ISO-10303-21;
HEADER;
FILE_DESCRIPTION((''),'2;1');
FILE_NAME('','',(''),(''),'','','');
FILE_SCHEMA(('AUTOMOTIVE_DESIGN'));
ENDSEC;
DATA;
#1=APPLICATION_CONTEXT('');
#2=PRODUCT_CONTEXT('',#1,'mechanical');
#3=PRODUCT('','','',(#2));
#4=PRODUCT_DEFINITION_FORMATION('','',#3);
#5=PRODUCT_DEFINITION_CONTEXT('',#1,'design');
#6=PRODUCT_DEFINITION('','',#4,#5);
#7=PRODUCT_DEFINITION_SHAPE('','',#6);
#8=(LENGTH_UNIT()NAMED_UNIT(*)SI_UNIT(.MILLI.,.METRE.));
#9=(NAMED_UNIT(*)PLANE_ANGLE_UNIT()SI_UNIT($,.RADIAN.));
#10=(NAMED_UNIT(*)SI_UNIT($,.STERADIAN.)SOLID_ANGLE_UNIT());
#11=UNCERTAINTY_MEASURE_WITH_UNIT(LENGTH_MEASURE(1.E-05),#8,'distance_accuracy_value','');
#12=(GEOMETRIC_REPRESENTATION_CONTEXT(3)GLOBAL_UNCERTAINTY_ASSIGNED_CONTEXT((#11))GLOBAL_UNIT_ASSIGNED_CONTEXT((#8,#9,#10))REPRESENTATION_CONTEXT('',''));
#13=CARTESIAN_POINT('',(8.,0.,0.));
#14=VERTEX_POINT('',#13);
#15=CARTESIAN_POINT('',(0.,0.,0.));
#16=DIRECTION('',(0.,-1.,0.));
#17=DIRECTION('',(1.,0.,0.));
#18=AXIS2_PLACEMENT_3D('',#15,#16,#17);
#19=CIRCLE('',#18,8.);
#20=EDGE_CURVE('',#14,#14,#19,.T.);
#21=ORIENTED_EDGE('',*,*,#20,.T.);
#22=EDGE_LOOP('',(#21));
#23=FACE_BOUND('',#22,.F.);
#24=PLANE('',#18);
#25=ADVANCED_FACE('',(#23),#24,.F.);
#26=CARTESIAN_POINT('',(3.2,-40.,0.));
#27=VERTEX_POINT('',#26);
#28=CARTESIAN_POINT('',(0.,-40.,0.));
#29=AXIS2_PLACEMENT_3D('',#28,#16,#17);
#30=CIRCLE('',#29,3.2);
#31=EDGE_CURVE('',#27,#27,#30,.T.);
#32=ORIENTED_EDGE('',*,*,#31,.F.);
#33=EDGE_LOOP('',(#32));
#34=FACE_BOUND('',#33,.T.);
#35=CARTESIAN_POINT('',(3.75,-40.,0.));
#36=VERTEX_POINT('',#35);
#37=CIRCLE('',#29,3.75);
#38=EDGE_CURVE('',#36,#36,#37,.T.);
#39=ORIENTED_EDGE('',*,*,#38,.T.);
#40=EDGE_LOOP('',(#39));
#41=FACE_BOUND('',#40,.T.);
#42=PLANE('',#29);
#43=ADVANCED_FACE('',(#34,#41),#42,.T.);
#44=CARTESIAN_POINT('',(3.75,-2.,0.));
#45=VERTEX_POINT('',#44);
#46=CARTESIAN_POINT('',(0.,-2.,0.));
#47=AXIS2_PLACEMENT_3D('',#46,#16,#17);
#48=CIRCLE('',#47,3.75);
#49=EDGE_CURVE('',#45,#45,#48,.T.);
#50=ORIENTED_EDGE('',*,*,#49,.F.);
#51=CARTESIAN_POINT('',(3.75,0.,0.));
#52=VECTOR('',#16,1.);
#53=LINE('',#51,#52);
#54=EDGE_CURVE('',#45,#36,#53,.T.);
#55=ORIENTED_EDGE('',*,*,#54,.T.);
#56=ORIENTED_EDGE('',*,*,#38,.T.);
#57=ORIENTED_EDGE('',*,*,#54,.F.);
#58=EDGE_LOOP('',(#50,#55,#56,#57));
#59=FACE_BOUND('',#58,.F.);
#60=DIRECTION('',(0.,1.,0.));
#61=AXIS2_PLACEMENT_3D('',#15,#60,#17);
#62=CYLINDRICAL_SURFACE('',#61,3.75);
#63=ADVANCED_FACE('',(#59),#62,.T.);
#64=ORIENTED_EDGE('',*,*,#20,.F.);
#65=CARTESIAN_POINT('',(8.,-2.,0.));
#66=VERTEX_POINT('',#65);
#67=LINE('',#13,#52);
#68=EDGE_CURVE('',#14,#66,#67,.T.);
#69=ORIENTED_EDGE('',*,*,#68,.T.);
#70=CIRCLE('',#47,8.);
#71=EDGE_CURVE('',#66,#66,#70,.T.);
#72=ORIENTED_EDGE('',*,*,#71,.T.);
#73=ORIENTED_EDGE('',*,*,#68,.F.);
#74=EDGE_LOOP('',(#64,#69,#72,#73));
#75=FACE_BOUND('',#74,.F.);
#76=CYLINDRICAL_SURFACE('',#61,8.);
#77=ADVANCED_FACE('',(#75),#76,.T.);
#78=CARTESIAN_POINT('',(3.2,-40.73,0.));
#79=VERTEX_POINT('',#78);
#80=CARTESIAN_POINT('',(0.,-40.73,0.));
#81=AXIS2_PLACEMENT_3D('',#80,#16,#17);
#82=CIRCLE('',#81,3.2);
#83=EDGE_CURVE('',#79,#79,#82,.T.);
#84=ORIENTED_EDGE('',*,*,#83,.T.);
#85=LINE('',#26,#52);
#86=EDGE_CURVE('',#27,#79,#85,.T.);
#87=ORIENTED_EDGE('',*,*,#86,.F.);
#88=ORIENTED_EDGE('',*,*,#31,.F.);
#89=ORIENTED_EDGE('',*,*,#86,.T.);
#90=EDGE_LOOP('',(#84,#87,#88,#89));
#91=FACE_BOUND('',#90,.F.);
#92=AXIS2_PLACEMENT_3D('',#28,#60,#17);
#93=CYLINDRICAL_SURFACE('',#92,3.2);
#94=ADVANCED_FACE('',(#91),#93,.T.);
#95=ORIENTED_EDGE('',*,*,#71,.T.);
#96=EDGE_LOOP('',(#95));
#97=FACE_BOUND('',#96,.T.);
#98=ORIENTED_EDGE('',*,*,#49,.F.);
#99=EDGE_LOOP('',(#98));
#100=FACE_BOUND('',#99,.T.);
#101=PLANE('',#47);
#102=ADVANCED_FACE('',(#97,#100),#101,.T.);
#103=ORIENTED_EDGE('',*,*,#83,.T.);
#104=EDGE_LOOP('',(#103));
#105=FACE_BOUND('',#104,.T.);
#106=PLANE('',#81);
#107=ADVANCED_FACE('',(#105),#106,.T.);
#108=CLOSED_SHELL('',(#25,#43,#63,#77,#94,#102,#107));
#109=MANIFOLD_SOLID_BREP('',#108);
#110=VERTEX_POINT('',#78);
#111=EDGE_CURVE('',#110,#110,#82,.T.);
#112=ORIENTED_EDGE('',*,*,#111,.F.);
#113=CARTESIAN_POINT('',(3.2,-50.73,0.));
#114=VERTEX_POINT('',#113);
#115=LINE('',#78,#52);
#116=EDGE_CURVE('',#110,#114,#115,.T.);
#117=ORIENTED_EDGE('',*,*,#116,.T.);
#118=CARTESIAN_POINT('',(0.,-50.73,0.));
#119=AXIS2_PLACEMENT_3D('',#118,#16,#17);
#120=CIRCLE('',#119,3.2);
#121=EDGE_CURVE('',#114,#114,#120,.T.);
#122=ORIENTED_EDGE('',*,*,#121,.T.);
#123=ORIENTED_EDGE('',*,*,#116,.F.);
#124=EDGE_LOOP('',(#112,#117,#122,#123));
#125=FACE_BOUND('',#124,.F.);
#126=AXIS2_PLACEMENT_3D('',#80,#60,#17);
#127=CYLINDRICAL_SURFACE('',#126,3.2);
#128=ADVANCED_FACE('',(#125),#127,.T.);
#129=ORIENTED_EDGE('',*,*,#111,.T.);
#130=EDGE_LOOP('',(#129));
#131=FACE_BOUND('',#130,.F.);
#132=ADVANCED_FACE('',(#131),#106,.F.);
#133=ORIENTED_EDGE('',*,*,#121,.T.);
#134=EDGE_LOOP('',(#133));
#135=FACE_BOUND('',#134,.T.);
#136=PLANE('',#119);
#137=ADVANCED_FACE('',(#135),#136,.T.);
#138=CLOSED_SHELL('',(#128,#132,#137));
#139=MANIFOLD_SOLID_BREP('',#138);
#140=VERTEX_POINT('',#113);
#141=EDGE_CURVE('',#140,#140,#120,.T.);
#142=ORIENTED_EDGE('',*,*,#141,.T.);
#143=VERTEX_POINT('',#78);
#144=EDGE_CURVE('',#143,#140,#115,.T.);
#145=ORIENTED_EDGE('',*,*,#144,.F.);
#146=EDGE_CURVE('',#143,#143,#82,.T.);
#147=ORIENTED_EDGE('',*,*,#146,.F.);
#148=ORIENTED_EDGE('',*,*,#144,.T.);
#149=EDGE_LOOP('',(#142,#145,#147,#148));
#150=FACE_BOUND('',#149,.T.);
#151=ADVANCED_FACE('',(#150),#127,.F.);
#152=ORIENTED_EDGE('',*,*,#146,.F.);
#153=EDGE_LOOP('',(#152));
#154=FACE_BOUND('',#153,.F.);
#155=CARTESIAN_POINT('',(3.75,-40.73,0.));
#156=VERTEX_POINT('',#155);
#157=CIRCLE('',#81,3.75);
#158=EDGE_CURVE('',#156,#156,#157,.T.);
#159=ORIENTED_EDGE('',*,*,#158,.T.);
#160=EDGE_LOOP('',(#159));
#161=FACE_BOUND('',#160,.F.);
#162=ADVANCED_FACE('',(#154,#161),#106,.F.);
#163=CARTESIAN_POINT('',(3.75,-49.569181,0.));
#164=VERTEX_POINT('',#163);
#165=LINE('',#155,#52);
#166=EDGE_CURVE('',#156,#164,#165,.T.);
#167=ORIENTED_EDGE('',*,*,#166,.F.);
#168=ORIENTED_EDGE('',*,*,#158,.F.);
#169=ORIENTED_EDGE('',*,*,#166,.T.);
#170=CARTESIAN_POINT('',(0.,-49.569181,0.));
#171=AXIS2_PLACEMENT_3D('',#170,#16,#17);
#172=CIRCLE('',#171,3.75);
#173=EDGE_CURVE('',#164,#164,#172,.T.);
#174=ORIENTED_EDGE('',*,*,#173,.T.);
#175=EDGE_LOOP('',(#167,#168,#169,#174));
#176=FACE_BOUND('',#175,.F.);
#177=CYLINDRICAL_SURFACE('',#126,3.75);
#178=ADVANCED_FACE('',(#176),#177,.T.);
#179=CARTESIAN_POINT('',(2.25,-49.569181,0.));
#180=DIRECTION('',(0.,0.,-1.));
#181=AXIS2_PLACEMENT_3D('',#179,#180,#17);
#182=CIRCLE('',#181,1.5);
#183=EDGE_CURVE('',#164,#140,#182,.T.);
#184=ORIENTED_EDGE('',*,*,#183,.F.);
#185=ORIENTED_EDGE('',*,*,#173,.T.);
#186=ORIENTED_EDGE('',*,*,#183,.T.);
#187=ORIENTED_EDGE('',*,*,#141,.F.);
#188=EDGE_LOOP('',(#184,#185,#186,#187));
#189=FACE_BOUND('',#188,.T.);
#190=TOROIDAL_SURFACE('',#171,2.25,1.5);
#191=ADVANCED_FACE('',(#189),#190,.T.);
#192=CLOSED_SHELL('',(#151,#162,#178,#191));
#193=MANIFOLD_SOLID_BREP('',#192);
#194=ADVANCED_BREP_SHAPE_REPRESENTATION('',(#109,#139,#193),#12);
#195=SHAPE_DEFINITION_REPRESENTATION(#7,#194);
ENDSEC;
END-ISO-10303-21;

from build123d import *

# Parameters (mm, degrees)
F0_R     = 3.75
F1_DEPTH = 40
F0_R_2   = 8
F2_DEPTH = 2
F3_R     = 3.2
F4_DEPTH = 0.73
F5_R     = 3.75
F5_R_2   = 3.2
F6_DEPTH = 10
F7_DEPTH = 10


# Not quite as in the source:
# - a fillet or chamfer that OpenCascade refuses, or shapes differently, is made with other operations: its cross-section is extruded or revolved along the edge and cut away or added


with BuildPart() as f1:
    # F0 (on Front) → F1 (new body)
    with BuildSketch(Plane.XZ):
        Circle(F0_R)
    extrude(amount=F1_DEPTH)

    # F0 (on Front) → F2 (join)
    with BuildSketch(Plane.XZ):
        Circle(F0_R_2)
        Circle(F0_R, mode=Mode.SUBTRACT)
    extrude(amount=F2_DEPTH)

    # F3 (on face) → F4 (join)
    with BuildSketch(Plane.XZ.offset(40)):
        Circle(F3_R)
    extrude(amount=F4_DEPTH)


with BuildPart() as f6:
    # F5 (on face) → F6 (new body)
    with BuildSketch(Plane.XZ.offset(40.73)):
        Circle(F5_R)
        Circle(F5_R_2, mode=Mode.SUBTRACT)
    extrude(amount=F6_DEPTH)

    # F8: fillet of radius 1.5 on 1 edges, made by hand

    # F8_s1 → F8_t2 (revolve, cut)
    with BuildSketch(Plane.XY):
        with BuildLine():
            ThreePointArc((3.75, -49.5691813234), (3.6055441712, -50.2114429523), (3.2, -50.73))
            Line((3.2, -50.73), (3.75, -50.73))
            Line((3.75, -50.73), (3.75, -49.5691813234))
        make_face()
    revolve(axis=Axis((0, -50.73, 0), (0, -1, 0)), mode=Mode.SUBTRACT)


with BuildPart() as f7:
    # F7 (new): a face of the model
    f7_faces = [f1.part.faces().sort_by_distance(p)[0] for p in [
        (0, -40.73, 0),
    ]]
    extrude(f7_faces, amount=F7_DEPTH)


solid = Compound([f1.part, f6.part, f7.part])
